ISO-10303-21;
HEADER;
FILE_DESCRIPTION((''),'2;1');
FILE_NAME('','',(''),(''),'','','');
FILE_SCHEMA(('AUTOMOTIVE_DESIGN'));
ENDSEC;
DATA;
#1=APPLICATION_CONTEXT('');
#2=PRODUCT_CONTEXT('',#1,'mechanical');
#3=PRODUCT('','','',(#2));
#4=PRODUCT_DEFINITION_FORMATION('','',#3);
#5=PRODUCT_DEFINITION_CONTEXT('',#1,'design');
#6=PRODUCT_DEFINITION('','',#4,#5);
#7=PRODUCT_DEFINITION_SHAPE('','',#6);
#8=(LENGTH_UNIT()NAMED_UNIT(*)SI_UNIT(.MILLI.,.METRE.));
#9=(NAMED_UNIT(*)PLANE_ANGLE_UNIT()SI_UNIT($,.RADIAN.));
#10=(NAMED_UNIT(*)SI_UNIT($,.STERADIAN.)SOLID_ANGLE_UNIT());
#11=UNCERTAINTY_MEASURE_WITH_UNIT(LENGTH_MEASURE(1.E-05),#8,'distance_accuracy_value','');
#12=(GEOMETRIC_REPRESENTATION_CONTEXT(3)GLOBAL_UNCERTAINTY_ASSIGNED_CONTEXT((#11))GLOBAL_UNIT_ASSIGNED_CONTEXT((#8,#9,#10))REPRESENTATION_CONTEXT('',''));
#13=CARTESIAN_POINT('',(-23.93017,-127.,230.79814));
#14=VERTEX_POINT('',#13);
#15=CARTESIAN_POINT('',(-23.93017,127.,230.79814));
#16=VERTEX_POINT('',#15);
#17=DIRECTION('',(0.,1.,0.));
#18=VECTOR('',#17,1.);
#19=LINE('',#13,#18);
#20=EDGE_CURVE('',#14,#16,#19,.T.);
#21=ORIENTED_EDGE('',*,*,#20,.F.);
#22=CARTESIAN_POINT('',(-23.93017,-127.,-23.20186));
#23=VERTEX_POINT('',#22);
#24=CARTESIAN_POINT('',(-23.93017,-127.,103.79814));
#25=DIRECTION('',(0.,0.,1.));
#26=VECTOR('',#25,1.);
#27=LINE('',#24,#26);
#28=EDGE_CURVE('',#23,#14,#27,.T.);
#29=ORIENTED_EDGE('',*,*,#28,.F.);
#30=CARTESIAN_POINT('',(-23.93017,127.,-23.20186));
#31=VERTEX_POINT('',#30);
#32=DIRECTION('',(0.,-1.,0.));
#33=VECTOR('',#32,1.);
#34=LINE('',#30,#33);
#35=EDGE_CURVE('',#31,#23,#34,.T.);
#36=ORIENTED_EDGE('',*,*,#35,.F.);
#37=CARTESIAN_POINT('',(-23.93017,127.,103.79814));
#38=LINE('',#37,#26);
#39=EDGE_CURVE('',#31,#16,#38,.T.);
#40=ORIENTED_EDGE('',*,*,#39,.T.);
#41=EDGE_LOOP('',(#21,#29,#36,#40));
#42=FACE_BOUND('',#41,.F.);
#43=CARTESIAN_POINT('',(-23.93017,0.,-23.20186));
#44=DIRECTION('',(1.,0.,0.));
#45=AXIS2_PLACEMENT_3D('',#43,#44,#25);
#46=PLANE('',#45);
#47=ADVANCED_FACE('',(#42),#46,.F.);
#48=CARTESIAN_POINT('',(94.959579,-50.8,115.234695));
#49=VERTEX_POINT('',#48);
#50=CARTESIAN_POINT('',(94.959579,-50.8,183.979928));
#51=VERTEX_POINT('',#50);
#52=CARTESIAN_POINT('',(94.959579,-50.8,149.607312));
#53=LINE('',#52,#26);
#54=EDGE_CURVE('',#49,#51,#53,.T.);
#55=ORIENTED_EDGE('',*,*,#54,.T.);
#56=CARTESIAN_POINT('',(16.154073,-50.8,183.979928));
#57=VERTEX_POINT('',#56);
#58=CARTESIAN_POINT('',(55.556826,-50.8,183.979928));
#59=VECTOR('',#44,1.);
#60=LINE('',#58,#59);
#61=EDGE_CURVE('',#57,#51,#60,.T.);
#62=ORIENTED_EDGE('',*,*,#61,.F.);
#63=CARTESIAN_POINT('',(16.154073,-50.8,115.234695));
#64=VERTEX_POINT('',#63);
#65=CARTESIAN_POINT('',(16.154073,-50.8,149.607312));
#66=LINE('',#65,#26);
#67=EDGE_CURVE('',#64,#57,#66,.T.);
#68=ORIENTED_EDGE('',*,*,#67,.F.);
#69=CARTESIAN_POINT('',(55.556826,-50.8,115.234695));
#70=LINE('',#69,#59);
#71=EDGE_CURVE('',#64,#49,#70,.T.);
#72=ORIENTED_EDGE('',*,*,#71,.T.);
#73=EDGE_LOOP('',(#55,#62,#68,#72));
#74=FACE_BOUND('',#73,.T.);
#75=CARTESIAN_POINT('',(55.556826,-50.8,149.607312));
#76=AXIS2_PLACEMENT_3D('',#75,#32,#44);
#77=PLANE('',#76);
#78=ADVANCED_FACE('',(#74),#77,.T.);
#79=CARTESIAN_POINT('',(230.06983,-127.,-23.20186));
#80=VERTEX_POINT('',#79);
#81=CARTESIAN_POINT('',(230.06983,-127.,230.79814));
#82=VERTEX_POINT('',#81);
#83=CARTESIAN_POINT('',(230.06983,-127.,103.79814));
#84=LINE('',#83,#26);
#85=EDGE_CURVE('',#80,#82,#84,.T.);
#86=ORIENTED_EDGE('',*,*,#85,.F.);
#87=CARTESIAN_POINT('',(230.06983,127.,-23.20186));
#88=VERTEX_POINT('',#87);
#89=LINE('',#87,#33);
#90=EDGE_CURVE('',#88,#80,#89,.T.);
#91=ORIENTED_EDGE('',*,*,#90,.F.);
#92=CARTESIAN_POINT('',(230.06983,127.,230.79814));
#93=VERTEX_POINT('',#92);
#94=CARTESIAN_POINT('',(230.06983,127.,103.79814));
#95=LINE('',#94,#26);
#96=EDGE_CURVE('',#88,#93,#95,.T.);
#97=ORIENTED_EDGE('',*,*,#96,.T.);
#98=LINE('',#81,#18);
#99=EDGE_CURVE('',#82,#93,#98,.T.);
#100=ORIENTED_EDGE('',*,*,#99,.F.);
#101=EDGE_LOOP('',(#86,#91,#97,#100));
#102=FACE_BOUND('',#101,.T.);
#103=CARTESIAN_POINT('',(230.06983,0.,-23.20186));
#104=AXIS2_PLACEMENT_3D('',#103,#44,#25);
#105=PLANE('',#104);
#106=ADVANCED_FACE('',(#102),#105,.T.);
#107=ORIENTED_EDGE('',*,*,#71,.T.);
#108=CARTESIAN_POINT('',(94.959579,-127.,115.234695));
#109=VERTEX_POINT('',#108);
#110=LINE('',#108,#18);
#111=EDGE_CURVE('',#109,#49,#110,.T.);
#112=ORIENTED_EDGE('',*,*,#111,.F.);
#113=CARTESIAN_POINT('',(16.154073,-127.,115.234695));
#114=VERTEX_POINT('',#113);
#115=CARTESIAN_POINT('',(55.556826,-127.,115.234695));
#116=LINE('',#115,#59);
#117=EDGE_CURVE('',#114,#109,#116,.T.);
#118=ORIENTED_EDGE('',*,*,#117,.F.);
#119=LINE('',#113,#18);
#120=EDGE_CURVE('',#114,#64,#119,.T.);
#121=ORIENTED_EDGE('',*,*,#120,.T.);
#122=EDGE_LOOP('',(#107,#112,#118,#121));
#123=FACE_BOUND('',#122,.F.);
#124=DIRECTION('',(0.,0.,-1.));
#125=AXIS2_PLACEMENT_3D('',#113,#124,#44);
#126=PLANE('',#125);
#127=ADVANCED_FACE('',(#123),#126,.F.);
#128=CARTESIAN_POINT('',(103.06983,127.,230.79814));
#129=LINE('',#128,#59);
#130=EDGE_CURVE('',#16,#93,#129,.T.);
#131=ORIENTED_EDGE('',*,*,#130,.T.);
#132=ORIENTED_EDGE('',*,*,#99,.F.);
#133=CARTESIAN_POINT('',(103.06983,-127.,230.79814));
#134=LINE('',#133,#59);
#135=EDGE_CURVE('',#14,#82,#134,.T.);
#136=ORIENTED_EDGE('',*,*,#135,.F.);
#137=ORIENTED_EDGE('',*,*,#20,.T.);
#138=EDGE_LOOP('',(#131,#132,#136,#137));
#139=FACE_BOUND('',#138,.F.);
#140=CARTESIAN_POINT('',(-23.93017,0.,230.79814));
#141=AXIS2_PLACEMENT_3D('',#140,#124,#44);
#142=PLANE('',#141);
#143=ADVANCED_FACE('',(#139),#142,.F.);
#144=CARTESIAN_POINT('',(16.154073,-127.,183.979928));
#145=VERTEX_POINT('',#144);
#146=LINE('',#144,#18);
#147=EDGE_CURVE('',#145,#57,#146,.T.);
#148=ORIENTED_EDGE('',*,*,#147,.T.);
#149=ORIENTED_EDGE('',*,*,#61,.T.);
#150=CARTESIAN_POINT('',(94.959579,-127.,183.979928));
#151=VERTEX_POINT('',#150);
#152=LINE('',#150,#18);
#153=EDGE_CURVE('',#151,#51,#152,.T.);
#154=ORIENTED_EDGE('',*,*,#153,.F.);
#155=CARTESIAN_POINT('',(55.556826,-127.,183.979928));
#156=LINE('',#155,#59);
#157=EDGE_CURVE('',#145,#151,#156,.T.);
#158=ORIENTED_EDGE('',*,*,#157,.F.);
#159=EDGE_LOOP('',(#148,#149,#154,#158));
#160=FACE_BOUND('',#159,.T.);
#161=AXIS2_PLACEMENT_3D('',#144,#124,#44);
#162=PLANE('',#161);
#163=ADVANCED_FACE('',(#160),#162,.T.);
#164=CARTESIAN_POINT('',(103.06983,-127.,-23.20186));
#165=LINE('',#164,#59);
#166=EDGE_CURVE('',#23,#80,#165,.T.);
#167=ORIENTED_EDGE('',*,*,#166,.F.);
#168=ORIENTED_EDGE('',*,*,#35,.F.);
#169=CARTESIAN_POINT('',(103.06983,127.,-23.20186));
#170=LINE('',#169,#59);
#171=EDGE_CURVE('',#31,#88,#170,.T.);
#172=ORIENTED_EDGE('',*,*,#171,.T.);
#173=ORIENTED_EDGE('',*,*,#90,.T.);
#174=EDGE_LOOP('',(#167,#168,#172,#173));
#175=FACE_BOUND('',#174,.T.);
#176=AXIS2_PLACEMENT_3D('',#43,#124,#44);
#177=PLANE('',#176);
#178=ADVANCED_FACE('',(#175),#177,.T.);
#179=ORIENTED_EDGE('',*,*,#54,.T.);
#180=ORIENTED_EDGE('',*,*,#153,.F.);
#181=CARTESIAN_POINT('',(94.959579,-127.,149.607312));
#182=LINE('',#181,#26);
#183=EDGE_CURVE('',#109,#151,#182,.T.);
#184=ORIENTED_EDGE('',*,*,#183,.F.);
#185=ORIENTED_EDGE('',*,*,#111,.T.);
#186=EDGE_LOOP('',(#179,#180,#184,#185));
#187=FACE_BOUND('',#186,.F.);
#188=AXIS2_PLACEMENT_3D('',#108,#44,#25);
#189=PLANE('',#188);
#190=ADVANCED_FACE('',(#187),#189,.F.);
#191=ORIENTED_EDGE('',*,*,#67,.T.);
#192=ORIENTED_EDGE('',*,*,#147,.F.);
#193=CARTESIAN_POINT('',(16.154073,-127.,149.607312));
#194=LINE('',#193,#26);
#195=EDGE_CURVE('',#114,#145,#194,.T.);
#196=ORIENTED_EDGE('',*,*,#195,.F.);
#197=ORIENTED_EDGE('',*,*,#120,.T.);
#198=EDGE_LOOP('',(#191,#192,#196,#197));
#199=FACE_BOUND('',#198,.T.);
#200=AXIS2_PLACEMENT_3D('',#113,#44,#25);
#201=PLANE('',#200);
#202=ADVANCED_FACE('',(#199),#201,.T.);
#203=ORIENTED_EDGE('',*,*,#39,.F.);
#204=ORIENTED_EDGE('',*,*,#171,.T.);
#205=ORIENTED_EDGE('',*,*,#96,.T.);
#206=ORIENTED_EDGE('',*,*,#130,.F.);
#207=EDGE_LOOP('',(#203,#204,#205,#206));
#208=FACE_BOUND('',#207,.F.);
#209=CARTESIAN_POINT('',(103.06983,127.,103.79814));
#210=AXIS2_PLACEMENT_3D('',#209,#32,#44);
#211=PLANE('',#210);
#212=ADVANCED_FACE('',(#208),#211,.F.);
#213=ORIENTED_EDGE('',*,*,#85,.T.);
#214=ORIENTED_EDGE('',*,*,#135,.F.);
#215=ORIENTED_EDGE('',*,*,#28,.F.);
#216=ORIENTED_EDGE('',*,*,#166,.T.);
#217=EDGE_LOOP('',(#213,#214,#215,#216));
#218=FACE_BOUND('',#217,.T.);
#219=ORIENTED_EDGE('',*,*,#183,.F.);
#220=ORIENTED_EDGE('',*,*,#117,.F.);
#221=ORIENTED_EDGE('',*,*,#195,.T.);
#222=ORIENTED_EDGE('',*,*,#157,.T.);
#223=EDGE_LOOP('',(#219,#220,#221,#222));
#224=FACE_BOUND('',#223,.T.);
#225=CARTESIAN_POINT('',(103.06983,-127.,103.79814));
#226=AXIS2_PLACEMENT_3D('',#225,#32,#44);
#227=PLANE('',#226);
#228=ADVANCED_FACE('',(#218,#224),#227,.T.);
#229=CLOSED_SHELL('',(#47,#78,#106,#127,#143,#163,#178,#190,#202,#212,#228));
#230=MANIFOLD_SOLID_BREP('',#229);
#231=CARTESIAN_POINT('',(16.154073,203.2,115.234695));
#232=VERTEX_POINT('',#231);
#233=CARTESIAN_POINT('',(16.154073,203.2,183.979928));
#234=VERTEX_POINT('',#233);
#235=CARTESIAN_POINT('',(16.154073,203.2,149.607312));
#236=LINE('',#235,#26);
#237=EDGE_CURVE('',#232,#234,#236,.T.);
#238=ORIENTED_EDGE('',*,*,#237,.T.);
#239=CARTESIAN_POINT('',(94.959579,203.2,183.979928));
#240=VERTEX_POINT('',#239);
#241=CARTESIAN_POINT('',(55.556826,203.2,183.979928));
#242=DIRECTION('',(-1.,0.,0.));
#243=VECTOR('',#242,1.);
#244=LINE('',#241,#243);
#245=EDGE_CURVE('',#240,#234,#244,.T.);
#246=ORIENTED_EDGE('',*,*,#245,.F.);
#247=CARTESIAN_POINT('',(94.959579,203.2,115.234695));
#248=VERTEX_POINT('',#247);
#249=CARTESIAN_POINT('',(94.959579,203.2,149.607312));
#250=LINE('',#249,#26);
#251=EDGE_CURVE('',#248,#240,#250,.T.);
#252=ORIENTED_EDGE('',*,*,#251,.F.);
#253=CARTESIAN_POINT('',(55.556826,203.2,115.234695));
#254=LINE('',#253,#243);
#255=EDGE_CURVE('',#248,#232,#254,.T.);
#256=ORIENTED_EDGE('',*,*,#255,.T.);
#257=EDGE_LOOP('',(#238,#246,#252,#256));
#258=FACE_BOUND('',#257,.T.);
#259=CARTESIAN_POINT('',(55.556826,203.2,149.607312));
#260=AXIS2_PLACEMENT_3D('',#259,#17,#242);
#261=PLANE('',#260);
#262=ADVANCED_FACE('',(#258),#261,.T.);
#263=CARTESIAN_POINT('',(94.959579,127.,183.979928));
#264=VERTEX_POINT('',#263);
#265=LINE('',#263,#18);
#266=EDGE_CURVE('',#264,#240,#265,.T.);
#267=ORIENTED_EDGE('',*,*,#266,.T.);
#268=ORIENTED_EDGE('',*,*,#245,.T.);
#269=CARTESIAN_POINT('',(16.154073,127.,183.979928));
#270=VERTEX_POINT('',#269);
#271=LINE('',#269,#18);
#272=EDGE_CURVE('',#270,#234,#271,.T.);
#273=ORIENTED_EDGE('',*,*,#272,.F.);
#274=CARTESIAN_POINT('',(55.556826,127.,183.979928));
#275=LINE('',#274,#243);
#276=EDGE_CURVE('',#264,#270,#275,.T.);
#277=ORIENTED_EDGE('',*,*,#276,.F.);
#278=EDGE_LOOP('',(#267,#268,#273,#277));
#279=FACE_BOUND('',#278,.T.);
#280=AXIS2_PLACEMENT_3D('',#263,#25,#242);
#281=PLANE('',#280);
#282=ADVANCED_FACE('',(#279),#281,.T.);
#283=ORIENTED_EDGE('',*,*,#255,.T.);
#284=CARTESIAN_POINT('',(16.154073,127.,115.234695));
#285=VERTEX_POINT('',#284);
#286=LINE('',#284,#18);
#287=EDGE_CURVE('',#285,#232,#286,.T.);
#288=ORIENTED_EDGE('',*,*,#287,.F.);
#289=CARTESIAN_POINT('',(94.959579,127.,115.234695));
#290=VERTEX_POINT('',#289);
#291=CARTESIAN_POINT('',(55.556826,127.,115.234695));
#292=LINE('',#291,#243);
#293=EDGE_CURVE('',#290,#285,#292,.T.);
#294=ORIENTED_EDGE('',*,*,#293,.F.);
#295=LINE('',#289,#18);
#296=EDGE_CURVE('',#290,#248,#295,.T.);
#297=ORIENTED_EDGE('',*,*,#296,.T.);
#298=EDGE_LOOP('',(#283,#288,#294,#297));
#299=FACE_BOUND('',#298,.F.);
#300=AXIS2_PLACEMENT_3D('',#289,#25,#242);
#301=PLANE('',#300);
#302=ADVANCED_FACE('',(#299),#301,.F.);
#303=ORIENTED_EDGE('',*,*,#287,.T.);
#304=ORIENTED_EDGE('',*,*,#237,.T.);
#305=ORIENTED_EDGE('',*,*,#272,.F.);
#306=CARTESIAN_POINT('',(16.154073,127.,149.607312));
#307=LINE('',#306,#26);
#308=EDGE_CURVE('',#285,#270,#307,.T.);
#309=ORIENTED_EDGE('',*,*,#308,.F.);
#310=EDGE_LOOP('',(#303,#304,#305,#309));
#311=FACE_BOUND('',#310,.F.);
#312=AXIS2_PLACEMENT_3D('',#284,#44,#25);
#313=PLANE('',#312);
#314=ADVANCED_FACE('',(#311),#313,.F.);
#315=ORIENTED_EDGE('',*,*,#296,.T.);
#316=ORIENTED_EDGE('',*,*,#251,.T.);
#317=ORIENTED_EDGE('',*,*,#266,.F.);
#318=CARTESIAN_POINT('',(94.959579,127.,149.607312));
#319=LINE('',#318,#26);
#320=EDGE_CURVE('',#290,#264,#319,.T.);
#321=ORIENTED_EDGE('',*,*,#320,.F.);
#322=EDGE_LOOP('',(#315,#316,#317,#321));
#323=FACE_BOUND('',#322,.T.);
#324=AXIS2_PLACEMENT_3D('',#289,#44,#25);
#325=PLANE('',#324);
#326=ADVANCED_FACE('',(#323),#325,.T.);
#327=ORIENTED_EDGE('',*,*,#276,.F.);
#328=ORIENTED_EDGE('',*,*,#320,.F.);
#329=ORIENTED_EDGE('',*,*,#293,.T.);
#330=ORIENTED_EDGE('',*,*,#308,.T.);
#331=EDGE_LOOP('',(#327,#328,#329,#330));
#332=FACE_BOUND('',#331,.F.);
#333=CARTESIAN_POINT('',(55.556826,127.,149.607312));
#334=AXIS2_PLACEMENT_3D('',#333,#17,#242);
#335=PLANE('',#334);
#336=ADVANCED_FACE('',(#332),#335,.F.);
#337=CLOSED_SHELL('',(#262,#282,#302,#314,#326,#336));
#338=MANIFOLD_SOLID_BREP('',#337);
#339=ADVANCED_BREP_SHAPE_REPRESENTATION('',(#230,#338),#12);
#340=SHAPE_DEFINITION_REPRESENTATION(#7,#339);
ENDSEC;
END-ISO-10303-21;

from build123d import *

# Parameters (mm, degrees)
F1_W     = 254
F1_H     = 254
F2_DEPTH = 127
F3_W     = 78.8055062294
F3_H     = 68.7452331185
F4_DEPTH = 76.2
F5_W     = 78.8055062294
F5_H     = 68.7452331185
F6_DEPTH = 76.2


# Not quite as in the source:
# - a variable given as a bare number and used for a length is read in inches; the dataset says mm whatever the document's units were


with BuildPart() as f2:
    # F1 (on Front) → F2 (new body, symmetric)
    with BuildSketch(Plane.XZ):
        with Locations((103.069830358, 103.7981395125)):
            Rectangle(F1_W, F1_H)
    extrude(amount=F2_DEPTH, both=True)

    # F3 (on face) → F4 (cut)
    with BuildSketch(Plane.XZ.offset(127)):
        with Locations((55.5568262935, 149.6073119342)):
            Rectangle(F3_W, F3_H)
    extrude(amount=-F4_DEPTH, mode=Mode.SUBTRACT)


with BuildPart() as f6:
    # F5 (on face) → F6 (new body)
    with BuildSketch(Plane(origin=(0, 127, 0), x_dir=(-1, 0, 0), z_dir=(0, 1, 0))):
        with Locations((-55.5568262935, 149.6073119342)):
            Rectangle(F5_W, F5_H)
    extrude(amount=F6_DEPTH)


solid = Compound([f2.part, f6.part])
